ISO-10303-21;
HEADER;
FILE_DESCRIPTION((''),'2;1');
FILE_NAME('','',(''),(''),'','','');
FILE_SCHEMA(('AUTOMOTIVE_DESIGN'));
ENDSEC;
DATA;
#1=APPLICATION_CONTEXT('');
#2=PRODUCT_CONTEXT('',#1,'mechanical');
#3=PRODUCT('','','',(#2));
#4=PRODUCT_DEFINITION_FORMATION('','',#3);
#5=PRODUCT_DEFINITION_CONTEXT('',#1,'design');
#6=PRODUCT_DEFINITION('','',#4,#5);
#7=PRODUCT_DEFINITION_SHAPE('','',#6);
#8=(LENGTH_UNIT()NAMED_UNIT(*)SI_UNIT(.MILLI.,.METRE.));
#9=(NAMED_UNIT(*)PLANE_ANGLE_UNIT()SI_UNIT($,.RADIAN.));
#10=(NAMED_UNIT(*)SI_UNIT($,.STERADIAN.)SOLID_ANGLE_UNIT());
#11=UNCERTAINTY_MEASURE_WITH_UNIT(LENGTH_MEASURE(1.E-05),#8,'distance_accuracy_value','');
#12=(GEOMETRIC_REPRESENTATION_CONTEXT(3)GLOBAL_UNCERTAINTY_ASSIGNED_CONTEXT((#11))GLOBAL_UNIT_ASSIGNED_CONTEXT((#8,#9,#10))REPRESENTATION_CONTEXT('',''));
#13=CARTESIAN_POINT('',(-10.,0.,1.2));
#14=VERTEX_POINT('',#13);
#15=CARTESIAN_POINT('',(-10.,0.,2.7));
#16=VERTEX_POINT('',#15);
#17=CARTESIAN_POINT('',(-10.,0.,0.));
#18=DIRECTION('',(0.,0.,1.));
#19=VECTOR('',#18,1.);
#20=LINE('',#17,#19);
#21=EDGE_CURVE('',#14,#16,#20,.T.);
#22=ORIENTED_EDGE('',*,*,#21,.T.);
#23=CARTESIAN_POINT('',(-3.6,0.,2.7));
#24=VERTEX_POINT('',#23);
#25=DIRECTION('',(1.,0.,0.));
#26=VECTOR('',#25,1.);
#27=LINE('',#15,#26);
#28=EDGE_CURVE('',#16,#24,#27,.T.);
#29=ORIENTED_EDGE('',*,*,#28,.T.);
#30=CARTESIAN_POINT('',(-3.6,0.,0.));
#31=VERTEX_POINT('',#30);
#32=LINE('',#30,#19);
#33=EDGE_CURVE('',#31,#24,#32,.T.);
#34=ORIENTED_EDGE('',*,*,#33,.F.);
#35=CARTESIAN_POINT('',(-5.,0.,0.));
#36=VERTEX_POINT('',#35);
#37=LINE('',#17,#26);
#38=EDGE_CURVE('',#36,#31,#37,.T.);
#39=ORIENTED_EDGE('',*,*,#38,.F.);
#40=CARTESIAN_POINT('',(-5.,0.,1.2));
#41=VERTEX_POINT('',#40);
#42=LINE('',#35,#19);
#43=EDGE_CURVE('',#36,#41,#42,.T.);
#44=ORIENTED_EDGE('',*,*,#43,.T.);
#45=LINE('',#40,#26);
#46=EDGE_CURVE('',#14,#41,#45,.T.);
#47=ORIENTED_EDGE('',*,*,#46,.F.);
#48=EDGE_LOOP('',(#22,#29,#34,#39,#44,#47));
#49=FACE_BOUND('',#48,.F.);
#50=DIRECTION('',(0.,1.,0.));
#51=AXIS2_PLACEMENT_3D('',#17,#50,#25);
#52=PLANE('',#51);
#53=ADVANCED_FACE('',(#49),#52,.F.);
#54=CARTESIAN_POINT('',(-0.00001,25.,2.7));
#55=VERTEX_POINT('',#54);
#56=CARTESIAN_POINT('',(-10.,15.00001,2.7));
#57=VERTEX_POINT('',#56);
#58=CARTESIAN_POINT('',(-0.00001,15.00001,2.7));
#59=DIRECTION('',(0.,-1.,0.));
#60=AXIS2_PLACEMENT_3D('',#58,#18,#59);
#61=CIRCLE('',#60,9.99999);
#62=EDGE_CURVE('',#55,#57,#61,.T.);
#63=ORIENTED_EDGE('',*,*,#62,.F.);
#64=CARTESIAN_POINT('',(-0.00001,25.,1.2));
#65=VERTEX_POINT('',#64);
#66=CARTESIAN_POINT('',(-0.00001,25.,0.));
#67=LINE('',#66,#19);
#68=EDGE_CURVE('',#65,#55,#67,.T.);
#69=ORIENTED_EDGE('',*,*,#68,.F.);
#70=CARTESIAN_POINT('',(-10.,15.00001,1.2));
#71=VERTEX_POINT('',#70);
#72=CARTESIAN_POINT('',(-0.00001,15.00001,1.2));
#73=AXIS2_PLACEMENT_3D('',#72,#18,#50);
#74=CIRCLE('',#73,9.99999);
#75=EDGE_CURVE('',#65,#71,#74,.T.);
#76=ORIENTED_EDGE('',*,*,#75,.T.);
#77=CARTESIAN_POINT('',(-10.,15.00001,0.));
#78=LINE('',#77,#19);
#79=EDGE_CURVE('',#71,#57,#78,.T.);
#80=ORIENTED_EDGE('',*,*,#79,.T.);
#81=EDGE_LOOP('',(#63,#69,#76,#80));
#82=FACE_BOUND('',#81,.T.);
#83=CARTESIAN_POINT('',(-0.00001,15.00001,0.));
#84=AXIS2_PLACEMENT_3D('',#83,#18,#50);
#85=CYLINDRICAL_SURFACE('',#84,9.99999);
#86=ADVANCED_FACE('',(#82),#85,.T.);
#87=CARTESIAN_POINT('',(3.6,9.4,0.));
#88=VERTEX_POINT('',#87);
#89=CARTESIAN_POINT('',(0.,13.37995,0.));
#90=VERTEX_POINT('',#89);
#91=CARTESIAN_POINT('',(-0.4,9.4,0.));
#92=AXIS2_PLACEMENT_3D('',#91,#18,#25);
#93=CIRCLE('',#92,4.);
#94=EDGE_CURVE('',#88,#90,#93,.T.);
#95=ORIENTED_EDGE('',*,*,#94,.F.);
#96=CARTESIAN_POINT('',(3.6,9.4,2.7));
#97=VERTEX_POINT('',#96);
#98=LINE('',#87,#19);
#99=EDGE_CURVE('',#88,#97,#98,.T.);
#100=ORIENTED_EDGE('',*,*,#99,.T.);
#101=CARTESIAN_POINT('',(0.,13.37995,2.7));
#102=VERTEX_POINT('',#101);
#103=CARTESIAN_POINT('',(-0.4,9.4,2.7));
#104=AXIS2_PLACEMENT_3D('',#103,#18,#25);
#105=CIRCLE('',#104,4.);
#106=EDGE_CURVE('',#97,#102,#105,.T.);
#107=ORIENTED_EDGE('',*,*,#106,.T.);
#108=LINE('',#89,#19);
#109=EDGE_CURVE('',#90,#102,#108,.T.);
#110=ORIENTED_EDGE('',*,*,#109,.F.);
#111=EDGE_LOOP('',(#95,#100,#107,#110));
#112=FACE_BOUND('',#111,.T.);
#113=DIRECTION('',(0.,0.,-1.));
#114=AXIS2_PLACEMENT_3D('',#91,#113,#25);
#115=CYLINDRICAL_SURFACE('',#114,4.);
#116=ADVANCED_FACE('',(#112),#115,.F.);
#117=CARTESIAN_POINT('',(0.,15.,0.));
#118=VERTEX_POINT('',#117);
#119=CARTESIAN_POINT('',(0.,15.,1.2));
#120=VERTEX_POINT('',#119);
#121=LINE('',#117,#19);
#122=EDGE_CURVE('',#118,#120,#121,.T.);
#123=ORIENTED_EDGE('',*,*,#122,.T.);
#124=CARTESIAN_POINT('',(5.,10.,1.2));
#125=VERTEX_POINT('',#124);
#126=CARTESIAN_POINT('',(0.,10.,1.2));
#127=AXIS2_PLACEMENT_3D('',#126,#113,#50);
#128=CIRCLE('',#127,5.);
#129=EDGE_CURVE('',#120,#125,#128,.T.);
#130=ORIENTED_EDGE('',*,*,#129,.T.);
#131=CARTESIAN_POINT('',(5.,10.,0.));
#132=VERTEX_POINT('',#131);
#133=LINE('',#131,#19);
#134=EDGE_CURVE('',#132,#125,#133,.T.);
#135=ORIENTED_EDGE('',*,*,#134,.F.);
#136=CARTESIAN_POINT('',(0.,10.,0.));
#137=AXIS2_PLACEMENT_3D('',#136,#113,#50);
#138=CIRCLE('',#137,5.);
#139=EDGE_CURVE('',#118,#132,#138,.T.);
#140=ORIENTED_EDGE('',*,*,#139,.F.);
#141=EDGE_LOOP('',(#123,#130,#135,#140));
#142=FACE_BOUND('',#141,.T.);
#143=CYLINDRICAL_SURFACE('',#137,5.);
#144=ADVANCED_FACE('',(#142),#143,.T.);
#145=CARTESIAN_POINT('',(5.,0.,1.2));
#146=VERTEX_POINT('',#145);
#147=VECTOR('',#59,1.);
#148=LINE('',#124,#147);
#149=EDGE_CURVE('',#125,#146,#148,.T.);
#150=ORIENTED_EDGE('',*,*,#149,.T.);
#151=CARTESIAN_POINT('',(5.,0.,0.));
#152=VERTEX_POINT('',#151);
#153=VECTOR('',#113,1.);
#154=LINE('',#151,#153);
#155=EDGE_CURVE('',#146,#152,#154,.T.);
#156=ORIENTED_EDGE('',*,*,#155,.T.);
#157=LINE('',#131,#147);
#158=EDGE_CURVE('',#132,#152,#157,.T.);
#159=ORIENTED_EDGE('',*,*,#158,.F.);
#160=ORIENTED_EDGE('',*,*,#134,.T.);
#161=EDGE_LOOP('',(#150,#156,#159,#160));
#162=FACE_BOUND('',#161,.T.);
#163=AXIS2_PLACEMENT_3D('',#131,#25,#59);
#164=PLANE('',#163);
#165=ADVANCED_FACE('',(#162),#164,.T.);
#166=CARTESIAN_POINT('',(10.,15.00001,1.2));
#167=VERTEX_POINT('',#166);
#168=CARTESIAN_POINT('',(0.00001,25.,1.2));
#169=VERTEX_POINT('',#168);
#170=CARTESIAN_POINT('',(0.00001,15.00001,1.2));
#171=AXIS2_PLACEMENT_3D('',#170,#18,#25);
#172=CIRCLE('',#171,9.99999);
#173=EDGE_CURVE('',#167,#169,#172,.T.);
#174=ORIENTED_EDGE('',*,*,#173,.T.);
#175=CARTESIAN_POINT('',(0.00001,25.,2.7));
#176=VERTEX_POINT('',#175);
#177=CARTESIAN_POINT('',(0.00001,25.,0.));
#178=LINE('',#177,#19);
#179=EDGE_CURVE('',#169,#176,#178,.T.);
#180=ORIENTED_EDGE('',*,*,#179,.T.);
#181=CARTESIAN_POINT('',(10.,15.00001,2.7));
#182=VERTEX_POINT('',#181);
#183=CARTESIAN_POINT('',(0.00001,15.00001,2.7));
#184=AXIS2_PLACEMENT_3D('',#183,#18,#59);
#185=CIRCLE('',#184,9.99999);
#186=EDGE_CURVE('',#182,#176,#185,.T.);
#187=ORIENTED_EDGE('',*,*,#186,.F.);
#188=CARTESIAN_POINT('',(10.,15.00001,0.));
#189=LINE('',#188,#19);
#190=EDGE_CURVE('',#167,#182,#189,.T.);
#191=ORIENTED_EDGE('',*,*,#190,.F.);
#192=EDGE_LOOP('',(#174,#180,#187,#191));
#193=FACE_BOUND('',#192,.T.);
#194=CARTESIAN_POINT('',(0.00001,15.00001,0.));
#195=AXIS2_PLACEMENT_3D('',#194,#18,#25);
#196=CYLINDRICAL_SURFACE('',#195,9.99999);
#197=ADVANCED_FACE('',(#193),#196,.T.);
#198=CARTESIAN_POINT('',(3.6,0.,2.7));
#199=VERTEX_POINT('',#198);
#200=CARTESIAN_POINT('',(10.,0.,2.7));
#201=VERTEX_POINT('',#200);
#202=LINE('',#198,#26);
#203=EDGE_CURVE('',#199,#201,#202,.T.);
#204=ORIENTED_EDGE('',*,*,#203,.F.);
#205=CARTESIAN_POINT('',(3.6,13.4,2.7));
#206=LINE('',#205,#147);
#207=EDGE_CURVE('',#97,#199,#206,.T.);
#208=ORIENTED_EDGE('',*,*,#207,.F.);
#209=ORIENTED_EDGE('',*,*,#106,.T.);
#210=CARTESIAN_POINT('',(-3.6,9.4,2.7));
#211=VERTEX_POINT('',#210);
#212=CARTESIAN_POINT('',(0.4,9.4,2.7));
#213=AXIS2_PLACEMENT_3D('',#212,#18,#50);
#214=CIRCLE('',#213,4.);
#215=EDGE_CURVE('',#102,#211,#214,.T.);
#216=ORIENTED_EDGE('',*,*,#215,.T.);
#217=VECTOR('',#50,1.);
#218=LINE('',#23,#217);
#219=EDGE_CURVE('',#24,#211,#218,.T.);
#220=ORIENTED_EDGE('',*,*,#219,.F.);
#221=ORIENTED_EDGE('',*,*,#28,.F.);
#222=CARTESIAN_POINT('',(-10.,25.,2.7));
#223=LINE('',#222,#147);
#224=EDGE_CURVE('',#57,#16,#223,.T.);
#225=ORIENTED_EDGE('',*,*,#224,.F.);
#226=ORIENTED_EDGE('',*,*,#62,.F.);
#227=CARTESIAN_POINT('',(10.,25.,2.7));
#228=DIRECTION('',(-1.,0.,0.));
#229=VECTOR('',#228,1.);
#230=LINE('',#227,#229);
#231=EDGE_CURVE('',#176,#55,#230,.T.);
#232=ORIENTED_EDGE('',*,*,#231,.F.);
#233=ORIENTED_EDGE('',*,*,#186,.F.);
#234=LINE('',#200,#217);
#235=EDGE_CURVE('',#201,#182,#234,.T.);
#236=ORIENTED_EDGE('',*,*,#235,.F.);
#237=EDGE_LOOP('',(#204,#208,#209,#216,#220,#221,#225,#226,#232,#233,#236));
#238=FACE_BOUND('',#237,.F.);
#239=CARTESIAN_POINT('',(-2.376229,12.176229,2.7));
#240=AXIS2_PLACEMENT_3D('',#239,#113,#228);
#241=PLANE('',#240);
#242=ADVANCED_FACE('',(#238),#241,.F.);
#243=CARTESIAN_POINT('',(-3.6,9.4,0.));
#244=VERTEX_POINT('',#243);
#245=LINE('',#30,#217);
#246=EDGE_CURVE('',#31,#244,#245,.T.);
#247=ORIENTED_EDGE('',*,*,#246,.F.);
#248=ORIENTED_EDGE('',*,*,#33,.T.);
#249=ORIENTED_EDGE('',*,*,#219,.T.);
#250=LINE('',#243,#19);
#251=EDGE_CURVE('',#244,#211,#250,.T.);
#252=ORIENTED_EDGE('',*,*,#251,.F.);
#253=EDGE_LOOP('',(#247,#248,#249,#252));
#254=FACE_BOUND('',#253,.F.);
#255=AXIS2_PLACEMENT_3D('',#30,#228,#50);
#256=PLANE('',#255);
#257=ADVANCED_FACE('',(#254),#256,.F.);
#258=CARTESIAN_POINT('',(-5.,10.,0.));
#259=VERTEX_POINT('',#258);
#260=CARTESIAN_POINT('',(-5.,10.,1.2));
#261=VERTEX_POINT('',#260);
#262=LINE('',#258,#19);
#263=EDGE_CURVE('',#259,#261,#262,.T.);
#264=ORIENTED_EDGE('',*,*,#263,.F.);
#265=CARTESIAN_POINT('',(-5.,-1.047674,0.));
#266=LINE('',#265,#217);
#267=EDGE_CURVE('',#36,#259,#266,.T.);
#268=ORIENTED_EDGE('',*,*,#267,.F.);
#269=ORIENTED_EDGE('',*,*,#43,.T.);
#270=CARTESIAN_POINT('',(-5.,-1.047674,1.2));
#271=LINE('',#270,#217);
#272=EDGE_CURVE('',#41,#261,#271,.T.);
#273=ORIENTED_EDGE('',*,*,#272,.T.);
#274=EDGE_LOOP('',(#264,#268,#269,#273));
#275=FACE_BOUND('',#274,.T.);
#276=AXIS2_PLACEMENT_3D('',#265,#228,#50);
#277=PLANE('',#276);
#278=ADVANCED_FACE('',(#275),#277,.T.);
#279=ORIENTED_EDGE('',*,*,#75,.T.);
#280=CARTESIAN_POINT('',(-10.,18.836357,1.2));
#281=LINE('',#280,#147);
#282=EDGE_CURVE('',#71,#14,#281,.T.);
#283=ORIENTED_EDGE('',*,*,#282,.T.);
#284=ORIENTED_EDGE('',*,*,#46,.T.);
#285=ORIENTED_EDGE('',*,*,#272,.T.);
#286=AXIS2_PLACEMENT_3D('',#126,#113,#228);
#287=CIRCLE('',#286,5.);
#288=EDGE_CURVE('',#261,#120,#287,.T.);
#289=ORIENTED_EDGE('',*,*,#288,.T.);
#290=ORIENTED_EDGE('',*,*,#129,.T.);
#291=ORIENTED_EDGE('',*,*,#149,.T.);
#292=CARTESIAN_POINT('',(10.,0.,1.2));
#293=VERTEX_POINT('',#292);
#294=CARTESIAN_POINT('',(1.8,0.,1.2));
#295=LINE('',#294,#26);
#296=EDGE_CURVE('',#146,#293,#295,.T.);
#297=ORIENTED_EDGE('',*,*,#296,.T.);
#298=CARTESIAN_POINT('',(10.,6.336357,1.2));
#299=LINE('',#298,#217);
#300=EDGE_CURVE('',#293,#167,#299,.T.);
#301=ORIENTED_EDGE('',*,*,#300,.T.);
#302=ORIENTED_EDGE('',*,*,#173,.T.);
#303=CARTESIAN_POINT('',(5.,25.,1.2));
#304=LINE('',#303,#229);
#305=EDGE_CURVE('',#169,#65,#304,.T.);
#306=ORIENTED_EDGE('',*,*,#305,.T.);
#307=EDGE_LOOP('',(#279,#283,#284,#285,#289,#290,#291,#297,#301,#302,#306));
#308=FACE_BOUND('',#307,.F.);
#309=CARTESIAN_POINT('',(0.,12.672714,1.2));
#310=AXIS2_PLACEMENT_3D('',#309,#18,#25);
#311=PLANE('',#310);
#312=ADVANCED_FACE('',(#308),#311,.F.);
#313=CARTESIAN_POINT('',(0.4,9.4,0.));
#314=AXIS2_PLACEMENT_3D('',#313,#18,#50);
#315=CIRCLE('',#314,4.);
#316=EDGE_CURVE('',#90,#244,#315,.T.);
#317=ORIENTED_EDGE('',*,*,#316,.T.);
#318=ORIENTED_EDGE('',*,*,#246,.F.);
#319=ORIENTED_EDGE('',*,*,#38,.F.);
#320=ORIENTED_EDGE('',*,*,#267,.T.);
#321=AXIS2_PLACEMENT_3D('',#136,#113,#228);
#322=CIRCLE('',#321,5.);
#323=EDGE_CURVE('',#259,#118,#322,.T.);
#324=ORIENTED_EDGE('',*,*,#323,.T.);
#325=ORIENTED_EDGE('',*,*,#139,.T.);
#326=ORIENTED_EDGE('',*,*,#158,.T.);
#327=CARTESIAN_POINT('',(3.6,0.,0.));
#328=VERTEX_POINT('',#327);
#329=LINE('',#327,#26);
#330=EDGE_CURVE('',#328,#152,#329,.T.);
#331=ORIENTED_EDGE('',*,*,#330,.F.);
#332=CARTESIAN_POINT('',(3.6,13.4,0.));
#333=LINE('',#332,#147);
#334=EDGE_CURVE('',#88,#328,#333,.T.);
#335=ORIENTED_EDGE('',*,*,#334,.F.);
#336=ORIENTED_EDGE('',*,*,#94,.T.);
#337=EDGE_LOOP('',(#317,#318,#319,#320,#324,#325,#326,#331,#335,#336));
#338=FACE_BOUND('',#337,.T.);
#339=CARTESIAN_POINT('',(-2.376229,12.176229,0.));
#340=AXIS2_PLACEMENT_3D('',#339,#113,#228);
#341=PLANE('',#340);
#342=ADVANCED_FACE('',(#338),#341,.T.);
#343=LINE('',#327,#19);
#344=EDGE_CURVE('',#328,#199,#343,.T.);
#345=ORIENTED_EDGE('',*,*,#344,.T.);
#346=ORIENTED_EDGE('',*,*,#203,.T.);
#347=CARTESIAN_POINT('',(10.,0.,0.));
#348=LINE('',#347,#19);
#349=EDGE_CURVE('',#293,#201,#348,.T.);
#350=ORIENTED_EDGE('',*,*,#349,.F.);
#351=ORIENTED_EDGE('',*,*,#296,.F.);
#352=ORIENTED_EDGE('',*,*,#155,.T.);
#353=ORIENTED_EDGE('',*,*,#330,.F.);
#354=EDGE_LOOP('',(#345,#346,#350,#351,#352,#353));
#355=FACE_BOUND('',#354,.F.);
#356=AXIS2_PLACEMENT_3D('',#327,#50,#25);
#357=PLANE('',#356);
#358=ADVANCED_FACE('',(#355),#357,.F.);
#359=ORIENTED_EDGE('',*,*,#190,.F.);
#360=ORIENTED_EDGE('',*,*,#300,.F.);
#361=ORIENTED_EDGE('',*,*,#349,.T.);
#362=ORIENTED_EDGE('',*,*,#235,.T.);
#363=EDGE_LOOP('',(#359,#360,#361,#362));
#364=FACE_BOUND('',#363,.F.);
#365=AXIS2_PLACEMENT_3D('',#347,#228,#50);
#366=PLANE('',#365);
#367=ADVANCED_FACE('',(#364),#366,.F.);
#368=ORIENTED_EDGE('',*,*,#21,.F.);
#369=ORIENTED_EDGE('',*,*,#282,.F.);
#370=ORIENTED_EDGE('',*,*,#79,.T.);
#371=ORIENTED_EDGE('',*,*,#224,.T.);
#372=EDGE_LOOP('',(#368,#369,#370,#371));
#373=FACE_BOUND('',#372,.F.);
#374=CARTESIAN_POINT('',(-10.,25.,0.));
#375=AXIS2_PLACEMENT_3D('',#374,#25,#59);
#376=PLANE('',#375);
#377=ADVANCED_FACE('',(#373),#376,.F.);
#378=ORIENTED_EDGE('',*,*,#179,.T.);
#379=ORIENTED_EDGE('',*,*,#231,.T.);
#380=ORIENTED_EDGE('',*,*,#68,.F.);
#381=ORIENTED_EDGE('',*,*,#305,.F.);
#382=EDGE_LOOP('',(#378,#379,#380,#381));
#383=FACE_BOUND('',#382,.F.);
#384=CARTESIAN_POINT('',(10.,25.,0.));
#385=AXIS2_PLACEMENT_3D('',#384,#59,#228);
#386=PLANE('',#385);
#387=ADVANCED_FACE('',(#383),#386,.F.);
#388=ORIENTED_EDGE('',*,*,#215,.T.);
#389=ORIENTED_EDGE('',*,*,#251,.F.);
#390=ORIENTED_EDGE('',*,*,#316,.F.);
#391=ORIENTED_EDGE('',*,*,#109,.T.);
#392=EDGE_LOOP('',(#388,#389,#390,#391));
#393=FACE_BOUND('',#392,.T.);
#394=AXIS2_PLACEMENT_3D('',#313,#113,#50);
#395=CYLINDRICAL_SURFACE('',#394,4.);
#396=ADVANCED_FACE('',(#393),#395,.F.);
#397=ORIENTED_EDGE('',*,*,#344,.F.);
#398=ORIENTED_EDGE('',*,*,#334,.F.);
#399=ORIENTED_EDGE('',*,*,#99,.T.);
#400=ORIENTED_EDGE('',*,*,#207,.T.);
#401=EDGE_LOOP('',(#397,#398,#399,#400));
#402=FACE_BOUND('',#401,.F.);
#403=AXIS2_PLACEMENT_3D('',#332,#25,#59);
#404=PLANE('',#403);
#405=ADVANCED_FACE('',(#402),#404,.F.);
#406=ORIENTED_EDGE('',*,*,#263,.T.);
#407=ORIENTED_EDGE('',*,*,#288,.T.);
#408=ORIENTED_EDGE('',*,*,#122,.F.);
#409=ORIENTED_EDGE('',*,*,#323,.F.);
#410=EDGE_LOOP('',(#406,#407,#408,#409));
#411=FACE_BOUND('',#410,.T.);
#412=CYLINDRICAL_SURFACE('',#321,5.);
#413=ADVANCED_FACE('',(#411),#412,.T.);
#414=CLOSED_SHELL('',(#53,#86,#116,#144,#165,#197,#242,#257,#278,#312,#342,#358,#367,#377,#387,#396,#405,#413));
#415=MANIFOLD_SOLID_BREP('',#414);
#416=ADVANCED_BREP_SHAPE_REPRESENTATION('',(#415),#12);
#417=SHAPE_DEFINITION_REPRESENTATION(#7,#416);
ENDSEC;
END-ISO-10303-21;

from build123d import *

# Parameters (mm, degrees)
F1_DEPTH    = 2.7
F2_T1_DEPTH = 2.7
F3_R        = 9.99999
F5_DEPTH    = 1.2


# Not quite as in the source:
# - a fillet or chamfer that OpenCascade refuses, or shapes differently, is made with other operations: its cross-section is extruded or revolved along the edge and cut away or added
# - a fillet or chamfer is up to 0.001 mm smaller than in the source, because OpenCascade refuses the exact size


with BuildPart() as f1:
    # F0 (on Top) → F1 (new body)
    with BuildSketch(Plane.XY):
        Polygon((-10, 0), (-3.6, 0), (-3.6, 13.4), (0, 13.4), (3.6, 13.4), (3.6, 0), (10, 0), (10, 25), (0, 25), (-10, 25), align=None)
    extrude(amount=F1_DEPTH)

    # F2: fillet of radius 4 on 2 edges, made by hand

    # F2_s2 → F2_t1 (join)
    with BuildSketch(Plane.XY):
        with BuildLine():
            ThreePointArc((0.4, 13.4), (-2.4284271247, 12.2284271247), (-3.6, 9.4))
            Line((-3.6, 9.4), (-3.6, 13.4))
            Line((-3.6, 13.4), (0.4, 13.4))
        make_face()
        with BuildLine():
            ThreePointArc((3.6, 9.4), (2.4284271247, 12.2284271247), (-0.4, 13.4))
            Line((-0.4, 13.4), (3.6, 13.4))
            Line((3.6, 13.4), (3.6, 9.4))
        make_face()
    extrude(amount=F2_T1_DEPTH)

    # F3 (radius 10 in the source; OpenCascade refuses exactly that, so slightly less here)
    f3_edges = [f1.edges().sort_by_distance(p)[0] for p in [
        (-10, 25, 1.35),
        (10, 25, 1.35),
    ]]
    fillet(f3_edges, radius=F3_R)

    # F4 (on Top) → F5 (cut)
    with BuildSketch(Plane.XY):
        with BuildLine():
            Line((-11.2521313131, -1.0476741055), (-5, -1.0476741055))
            Line((-5, -1.0476741055), (-5, 10))
            ThreePointArc((-5, 10), (-3.5355339059, 13.5355339059), (0, 15))
            ThreePointArc((0, 15), (3.5355339059, 13.5355339059), (5, 10))
            Line((5, 10), (5, -1.0476741055))
            Line((5, -1.0476741055), (11.2521313131, -1.0476741055))
            Line((11.2521313131, -1.0476741055), (11.2521313131, 27.1253902465))
            Line((11.2521313131, 27.1253902465), (0, 27.1253902465))
            Line((0, 27.1253902465), (-11.2521313131, 27.1253902465))
            Line((-11.2521313131, 27.1253902465), (-11.2521313131, -1.0476741055))
        make_face()
    extrude(amount=F5_DEPTH, mode=Mode.SUBTRACT)


solid = f1.part
